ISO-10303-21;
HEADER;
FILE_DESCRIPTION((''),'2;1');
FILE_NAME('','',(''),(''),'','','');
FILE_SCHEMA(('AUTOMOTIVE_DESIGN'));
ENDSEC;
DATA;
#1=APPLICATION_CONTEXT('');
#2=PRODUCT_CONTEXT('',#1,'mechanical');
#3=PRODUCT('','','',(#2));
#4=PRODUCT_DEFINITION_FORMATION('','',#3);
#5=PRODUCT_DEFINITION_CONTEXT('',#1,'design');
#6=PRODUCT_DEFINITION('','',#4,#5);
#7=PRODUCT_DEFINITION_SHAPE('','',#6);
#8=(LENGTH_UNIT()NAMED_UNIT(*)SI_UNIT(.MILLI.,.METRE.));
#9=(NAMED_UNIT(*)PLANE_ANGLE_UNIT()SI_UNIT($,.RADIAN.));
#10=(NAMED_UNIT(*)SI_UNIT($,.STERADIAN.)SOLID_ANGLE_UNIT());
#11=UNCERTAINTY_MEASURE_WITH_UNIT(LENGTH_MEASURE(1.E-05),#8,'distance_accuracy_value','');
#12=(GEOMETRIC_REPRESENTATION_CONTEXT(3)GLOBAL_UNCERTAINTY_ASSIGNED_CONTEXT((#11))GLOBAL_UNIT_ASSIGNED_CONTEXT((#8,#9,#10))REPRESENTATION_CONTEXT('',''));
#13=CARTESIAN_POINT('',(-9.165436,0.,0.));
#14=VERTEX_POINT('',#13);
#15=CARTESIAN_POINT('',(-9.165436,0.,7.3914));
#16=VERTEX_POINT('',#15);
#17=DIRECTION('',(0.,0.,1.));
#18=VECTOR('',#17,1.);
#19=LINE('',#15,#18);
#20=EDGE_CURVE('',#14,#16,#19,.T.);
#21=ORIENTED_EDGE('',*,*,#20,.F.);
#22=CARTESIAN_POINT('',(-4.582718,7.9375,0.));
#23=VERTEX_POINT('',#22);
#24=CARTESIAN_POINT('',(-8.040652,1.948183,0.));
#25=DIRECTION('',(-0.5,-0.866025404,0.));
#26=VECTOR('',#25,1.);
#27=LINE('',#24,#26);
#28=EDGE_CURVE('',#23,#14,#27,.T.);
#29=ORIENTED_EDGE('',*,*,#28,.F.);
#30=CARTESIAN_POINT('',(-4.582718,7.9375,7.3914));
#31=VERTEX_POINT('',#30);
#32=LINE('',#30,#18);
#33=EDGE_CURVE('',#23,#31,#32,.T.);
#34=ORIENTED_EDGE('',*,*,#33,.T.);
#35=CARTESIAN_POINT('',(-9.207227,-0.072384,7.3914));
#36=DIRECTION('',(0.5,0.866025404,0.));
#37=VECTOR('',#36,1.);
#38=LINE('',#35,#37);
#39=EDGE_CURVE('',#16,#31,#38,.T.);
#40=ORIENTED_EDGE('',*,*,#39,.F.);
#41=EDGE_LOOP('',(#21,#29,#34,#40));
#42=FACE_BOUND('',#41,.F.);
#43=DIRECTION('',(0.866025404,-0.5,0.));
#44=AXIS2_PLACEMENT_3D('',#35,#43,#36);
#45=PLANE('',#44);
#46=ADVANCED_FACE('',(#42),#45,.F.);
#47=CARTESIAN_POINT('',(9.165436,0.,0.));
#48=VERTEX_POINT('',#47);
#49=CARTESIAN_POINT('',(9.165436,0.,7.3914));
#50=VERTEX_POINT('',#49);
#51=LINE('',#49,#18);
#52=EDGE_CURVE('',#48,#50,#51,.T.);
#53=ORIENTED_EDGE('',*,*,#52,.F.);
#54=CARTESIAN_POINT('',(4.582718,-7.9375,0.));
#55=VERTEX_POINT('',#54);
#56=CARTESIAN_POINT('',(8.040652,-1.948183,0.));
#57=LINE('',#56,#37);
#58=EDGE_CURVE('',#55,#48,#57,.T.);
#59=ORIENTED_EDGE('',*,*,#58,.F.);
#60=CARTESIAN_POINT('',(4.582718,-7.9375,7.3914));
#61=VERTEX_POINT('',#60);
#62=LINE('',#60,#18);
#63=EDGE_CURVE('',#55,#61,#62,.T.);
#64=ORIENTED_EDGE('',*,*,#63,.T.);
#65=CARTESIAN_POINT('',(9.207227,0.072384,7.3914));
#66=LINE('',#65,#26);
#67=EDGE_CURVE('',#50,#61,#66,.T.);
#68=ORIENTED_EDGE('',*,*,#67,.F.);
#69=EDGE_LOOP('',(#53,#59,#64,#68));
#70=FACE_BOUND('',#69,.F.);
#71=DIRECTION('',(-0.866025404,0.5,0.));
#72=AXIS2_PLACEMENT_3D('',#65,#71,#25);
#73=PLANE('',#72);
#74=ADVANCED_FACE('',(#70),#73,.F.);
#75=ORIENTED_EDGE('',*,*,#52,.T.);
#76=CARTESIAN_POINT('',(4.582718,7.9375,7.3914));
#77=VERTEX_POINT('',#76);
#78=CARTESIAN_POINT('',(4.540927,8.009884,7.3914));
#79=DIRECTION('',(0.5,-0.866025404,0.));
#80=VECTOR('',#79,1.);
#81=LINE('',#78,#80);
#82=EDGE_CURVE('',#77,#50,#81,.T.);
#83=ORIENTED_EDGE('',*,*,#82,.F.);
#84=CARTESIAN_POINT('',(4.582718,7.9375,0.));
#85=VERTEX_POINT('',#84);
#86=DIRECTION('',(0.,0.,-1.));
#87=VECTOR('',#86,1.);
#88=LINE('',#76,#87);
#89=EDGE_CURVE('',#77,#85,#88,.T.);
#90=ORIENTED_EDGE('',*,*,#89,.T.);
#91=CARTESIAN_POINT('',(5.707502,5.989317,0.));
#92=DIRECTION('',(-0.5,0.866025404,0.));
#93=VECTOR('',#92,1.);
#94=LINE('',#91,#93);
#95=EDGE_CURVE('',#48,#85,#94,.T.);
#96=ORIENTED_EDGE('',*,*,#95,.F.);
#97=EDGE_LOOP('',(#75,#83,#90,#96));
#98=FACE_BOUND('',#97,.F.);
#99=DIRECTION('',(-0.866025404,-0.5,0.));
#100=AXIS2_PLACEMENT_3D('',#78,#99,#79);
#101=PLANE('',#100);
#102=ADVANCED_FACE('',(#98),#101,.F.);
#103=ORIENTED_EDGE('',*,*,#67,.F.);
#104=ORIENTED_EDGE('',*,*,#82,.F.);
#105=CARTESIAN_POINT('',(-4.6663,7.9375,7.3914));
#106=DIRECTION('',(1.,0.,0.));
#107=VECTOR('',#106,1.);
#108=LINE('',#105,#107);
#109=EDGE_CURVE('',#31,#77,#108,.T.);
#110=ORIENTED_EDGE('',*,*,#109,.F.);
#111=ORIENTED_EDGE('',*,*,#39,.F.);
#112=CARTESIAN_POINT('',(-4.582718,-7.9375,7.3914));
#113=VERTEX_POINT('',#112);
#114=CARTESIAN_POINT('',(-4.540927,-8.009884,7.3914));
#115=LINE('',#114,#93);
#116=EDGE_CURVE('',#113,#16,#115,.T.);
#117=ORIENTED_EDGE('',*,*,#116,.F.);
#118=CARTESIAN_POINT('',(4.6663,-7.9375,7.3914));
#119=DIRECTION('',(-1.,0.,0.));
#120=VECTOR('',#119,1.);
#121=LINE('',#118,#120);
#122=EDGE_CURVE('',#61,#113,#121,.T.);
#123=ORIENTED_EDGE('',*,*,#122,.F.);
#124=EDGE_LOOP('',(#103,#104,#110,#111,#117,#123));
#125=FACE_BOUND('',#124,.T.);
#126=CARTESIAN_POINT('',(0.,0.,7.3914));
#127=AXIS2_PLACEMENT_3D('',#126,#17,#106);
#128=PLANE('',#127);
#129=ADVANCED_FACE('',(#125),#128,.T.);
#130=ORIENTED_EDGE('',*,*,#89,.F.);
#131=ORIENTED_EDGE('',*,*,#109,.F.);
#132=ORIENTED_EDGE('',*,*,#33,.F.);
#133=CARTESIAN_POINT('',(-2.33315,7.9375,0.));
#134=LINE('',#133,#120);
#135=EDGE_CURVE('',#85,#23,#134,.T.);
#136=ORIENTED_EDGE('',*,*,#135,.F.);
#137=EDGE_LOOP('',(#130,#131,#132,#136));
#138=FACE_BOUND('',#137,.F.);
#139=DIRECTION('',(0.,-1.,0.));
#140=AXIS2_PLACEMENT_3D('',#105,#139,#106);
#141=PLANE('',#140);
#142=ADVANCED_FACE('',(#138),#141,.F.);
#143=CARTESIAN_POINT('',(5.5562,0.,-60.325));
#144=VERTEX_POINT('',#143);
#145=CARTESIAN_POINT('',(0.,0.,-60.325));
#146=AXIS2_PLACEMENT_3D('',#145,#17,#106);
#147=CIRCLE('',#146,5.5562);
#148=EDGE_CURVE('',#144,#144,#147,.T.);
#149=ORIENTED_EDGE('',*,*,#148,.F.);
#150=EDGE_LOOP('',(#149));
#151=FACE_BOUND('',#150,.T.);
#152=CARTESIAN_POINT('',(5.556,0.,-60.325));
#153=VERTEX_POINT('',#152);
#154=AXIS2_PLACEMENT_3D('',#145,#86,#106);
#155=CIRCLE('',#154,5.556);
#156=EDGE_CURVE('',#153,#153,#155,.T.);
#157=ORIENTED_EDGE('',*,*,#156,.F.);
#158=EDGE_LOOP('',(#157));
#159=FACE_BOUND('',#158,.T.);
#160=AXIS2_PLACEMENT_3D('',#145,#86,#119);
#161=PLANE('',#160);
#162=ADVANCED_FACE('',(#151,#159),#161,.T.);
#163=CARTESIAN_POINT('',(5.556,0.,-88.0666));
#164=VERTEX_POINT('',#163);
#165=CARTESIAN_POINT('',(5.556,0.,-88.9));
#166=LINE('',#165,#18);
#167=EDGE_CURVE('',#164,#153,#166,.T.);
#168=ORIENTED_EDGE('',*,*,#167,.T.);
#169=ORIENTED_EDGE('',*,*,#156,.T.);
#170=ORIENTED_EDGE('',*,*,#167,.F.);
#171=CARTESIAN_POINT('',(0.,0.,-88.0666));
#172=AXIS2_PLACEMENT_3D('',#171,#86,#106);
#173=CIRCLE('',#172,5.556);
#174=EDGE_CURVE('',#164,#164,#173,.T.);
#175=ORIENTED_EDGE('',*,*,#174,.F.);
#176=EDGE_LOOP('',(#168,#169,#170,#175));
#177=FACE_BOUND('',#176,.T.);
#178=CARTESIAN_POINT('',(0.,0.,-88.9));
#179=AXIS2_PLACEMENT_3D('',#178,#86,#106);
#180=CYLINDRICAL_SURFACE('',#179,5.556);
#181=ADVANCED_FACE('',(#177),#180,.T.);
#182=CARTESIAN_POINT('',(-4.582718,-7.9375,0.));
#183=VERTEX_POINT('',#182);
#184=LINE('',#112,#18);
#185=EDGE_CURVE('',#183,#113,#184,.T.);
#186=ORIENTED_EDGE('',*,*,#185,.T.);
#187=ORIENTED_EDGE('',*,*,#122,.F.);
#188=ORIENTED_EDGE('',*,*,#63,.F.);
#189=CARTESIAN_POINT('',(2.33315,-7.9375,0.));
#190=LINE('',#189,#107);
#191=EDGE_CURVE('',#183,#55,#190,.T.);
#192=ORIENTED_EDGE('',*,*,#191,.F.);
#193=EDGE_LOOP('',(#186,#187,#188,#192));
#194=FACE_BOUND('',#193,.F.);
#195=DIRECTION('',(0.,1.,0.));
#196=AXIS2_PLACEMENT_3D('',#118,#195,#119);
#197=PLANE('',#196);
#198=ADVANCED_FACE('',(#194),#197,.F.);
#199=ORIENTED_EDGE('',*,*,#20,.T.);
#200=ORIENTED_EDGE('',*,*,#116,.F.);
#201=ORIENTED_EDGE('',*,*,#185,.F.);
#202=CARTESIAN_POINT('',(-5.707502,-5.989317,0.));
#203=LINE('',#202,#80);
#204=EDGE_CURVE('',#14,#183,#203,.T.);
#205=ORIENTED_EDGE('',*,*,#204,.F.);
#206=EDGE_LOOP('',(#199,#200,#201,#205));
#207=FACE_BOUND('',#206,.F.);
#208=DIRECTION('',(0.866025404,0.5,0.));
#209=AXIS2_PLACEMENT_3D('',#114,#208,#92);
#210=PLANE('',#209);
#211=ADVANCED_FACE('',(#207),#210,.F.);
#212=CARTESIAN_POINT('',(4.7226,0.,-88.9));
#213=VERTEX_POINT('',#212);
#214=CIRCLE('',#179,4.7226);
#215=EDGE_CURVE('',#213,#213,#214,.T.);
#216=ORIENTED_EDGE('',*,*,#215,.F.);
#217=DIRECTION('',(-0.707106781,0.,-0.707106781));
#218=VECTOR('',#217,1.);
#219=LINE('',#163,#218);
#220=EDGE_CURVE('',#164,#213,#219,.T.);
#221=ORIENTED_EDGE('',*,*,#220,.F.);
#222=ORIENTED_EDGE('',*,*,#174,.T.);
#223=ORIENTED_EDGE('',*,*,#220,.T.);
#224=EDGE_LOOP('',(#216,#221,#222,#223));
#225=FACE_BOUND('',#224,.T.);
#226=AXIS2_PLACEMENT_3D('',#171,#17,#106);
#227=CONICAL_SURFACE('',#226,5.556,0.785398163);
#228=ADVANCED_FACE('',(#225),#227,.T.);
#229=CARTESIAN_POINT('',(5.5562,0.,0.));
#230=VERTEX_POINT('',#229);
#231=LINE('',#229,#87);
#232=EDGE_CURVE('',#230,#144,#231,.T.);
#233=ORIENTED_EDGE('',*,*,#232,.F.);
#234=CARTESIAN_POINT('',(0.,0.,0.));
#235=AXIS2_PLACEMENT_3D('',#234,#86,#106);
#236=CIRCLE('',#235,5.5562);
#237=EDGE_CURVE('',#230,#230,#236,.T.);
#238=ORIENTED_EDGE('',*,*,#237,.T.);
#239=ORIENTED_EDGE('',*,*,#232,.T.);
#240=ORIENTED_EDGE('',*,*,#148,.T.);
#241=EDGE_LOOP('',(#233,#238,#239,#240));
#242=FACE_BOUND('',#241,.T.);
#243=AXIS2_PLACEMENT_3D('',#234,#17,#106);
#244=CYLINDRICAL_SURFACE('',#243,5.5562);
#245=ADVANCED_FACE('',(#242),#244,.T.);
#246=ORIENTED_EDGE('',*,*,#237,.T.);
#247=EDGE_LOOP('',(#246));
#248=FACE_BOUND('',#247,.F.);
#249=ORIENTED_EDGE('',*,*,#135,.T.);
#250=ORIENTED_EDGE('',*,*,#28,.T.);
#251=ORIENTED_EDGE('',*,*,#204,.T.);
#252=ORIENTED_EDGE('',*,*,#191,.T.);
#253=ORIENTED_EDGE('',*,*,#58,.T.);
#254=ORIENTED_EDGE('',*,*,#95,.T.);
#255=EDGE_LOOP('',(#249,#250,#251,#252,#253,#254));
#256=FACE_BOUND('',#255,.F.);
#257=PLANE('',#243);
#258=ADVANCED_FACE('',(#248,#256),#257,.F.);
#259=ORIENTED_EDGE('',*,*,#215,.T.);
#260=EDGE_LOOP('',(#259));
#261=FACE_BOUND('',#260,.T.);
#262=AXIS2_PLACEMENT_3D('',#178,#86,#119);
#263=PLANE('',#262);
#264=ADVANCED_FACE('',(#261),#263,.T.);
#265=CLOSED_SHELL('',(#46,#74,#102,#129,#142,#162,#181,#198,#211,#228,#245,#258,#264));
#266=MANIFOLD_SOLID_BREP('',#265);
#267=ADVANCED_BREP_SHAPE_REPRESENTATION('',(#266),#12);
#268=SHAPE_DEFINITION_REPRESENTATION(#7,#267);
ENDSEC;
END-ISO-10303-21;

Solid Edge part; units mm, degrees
sketch "Sketch1" plane through (0, 0, 0) normal (0, 0, 1) x (1, 0, 0)
  circle A0 centre (0, 0) radius 9.2075
  dimension "D1" = 18.415
extrude "Protrusion1" add sketch "Sketch1" along normal blind 7.3914
sketch "Sketch2" plane through (0, 0, 0) normal (0, 0, -1) x (1, 0, 0)
  circle A0 centre (0, 0) radius 5.5562
extrude "Protrusion2" add sketch "Sketch2" along normal blind 88.9
sketch "Sketch3" plane through (0, 0, -88.9) normal (0, 0, -1) x (1, 0, 0)
  circle A0 centre (0, 0) radius 5.556
extrude "Cutout1" cut sketch "Sketch3" against normal blind 28.575 flip side to cut
chamfer "Chamfer_1" distance 0.8334 angle 45 1 edges at (-5.556, 0, -88.9)
sketch "Sketch4" plane through (0, 0, 7.3914) normal (0, 0, 1) x (1, 0, 0)
  line L0 (-4.6663, 7.9375) -> (4.6663, 7.9375)
  dimension "D1" = 15.875
extrude "Cutout2" cut sketch "Sketch4" against normal up to next material side at (0, 7.9875, 7.3914)
pattern_circular "Pattern1" count 6 over 360 about axis through (0, 0, 7.3914) along (0, 0, 1) of "Cutout2"
properties part number "24102293"
